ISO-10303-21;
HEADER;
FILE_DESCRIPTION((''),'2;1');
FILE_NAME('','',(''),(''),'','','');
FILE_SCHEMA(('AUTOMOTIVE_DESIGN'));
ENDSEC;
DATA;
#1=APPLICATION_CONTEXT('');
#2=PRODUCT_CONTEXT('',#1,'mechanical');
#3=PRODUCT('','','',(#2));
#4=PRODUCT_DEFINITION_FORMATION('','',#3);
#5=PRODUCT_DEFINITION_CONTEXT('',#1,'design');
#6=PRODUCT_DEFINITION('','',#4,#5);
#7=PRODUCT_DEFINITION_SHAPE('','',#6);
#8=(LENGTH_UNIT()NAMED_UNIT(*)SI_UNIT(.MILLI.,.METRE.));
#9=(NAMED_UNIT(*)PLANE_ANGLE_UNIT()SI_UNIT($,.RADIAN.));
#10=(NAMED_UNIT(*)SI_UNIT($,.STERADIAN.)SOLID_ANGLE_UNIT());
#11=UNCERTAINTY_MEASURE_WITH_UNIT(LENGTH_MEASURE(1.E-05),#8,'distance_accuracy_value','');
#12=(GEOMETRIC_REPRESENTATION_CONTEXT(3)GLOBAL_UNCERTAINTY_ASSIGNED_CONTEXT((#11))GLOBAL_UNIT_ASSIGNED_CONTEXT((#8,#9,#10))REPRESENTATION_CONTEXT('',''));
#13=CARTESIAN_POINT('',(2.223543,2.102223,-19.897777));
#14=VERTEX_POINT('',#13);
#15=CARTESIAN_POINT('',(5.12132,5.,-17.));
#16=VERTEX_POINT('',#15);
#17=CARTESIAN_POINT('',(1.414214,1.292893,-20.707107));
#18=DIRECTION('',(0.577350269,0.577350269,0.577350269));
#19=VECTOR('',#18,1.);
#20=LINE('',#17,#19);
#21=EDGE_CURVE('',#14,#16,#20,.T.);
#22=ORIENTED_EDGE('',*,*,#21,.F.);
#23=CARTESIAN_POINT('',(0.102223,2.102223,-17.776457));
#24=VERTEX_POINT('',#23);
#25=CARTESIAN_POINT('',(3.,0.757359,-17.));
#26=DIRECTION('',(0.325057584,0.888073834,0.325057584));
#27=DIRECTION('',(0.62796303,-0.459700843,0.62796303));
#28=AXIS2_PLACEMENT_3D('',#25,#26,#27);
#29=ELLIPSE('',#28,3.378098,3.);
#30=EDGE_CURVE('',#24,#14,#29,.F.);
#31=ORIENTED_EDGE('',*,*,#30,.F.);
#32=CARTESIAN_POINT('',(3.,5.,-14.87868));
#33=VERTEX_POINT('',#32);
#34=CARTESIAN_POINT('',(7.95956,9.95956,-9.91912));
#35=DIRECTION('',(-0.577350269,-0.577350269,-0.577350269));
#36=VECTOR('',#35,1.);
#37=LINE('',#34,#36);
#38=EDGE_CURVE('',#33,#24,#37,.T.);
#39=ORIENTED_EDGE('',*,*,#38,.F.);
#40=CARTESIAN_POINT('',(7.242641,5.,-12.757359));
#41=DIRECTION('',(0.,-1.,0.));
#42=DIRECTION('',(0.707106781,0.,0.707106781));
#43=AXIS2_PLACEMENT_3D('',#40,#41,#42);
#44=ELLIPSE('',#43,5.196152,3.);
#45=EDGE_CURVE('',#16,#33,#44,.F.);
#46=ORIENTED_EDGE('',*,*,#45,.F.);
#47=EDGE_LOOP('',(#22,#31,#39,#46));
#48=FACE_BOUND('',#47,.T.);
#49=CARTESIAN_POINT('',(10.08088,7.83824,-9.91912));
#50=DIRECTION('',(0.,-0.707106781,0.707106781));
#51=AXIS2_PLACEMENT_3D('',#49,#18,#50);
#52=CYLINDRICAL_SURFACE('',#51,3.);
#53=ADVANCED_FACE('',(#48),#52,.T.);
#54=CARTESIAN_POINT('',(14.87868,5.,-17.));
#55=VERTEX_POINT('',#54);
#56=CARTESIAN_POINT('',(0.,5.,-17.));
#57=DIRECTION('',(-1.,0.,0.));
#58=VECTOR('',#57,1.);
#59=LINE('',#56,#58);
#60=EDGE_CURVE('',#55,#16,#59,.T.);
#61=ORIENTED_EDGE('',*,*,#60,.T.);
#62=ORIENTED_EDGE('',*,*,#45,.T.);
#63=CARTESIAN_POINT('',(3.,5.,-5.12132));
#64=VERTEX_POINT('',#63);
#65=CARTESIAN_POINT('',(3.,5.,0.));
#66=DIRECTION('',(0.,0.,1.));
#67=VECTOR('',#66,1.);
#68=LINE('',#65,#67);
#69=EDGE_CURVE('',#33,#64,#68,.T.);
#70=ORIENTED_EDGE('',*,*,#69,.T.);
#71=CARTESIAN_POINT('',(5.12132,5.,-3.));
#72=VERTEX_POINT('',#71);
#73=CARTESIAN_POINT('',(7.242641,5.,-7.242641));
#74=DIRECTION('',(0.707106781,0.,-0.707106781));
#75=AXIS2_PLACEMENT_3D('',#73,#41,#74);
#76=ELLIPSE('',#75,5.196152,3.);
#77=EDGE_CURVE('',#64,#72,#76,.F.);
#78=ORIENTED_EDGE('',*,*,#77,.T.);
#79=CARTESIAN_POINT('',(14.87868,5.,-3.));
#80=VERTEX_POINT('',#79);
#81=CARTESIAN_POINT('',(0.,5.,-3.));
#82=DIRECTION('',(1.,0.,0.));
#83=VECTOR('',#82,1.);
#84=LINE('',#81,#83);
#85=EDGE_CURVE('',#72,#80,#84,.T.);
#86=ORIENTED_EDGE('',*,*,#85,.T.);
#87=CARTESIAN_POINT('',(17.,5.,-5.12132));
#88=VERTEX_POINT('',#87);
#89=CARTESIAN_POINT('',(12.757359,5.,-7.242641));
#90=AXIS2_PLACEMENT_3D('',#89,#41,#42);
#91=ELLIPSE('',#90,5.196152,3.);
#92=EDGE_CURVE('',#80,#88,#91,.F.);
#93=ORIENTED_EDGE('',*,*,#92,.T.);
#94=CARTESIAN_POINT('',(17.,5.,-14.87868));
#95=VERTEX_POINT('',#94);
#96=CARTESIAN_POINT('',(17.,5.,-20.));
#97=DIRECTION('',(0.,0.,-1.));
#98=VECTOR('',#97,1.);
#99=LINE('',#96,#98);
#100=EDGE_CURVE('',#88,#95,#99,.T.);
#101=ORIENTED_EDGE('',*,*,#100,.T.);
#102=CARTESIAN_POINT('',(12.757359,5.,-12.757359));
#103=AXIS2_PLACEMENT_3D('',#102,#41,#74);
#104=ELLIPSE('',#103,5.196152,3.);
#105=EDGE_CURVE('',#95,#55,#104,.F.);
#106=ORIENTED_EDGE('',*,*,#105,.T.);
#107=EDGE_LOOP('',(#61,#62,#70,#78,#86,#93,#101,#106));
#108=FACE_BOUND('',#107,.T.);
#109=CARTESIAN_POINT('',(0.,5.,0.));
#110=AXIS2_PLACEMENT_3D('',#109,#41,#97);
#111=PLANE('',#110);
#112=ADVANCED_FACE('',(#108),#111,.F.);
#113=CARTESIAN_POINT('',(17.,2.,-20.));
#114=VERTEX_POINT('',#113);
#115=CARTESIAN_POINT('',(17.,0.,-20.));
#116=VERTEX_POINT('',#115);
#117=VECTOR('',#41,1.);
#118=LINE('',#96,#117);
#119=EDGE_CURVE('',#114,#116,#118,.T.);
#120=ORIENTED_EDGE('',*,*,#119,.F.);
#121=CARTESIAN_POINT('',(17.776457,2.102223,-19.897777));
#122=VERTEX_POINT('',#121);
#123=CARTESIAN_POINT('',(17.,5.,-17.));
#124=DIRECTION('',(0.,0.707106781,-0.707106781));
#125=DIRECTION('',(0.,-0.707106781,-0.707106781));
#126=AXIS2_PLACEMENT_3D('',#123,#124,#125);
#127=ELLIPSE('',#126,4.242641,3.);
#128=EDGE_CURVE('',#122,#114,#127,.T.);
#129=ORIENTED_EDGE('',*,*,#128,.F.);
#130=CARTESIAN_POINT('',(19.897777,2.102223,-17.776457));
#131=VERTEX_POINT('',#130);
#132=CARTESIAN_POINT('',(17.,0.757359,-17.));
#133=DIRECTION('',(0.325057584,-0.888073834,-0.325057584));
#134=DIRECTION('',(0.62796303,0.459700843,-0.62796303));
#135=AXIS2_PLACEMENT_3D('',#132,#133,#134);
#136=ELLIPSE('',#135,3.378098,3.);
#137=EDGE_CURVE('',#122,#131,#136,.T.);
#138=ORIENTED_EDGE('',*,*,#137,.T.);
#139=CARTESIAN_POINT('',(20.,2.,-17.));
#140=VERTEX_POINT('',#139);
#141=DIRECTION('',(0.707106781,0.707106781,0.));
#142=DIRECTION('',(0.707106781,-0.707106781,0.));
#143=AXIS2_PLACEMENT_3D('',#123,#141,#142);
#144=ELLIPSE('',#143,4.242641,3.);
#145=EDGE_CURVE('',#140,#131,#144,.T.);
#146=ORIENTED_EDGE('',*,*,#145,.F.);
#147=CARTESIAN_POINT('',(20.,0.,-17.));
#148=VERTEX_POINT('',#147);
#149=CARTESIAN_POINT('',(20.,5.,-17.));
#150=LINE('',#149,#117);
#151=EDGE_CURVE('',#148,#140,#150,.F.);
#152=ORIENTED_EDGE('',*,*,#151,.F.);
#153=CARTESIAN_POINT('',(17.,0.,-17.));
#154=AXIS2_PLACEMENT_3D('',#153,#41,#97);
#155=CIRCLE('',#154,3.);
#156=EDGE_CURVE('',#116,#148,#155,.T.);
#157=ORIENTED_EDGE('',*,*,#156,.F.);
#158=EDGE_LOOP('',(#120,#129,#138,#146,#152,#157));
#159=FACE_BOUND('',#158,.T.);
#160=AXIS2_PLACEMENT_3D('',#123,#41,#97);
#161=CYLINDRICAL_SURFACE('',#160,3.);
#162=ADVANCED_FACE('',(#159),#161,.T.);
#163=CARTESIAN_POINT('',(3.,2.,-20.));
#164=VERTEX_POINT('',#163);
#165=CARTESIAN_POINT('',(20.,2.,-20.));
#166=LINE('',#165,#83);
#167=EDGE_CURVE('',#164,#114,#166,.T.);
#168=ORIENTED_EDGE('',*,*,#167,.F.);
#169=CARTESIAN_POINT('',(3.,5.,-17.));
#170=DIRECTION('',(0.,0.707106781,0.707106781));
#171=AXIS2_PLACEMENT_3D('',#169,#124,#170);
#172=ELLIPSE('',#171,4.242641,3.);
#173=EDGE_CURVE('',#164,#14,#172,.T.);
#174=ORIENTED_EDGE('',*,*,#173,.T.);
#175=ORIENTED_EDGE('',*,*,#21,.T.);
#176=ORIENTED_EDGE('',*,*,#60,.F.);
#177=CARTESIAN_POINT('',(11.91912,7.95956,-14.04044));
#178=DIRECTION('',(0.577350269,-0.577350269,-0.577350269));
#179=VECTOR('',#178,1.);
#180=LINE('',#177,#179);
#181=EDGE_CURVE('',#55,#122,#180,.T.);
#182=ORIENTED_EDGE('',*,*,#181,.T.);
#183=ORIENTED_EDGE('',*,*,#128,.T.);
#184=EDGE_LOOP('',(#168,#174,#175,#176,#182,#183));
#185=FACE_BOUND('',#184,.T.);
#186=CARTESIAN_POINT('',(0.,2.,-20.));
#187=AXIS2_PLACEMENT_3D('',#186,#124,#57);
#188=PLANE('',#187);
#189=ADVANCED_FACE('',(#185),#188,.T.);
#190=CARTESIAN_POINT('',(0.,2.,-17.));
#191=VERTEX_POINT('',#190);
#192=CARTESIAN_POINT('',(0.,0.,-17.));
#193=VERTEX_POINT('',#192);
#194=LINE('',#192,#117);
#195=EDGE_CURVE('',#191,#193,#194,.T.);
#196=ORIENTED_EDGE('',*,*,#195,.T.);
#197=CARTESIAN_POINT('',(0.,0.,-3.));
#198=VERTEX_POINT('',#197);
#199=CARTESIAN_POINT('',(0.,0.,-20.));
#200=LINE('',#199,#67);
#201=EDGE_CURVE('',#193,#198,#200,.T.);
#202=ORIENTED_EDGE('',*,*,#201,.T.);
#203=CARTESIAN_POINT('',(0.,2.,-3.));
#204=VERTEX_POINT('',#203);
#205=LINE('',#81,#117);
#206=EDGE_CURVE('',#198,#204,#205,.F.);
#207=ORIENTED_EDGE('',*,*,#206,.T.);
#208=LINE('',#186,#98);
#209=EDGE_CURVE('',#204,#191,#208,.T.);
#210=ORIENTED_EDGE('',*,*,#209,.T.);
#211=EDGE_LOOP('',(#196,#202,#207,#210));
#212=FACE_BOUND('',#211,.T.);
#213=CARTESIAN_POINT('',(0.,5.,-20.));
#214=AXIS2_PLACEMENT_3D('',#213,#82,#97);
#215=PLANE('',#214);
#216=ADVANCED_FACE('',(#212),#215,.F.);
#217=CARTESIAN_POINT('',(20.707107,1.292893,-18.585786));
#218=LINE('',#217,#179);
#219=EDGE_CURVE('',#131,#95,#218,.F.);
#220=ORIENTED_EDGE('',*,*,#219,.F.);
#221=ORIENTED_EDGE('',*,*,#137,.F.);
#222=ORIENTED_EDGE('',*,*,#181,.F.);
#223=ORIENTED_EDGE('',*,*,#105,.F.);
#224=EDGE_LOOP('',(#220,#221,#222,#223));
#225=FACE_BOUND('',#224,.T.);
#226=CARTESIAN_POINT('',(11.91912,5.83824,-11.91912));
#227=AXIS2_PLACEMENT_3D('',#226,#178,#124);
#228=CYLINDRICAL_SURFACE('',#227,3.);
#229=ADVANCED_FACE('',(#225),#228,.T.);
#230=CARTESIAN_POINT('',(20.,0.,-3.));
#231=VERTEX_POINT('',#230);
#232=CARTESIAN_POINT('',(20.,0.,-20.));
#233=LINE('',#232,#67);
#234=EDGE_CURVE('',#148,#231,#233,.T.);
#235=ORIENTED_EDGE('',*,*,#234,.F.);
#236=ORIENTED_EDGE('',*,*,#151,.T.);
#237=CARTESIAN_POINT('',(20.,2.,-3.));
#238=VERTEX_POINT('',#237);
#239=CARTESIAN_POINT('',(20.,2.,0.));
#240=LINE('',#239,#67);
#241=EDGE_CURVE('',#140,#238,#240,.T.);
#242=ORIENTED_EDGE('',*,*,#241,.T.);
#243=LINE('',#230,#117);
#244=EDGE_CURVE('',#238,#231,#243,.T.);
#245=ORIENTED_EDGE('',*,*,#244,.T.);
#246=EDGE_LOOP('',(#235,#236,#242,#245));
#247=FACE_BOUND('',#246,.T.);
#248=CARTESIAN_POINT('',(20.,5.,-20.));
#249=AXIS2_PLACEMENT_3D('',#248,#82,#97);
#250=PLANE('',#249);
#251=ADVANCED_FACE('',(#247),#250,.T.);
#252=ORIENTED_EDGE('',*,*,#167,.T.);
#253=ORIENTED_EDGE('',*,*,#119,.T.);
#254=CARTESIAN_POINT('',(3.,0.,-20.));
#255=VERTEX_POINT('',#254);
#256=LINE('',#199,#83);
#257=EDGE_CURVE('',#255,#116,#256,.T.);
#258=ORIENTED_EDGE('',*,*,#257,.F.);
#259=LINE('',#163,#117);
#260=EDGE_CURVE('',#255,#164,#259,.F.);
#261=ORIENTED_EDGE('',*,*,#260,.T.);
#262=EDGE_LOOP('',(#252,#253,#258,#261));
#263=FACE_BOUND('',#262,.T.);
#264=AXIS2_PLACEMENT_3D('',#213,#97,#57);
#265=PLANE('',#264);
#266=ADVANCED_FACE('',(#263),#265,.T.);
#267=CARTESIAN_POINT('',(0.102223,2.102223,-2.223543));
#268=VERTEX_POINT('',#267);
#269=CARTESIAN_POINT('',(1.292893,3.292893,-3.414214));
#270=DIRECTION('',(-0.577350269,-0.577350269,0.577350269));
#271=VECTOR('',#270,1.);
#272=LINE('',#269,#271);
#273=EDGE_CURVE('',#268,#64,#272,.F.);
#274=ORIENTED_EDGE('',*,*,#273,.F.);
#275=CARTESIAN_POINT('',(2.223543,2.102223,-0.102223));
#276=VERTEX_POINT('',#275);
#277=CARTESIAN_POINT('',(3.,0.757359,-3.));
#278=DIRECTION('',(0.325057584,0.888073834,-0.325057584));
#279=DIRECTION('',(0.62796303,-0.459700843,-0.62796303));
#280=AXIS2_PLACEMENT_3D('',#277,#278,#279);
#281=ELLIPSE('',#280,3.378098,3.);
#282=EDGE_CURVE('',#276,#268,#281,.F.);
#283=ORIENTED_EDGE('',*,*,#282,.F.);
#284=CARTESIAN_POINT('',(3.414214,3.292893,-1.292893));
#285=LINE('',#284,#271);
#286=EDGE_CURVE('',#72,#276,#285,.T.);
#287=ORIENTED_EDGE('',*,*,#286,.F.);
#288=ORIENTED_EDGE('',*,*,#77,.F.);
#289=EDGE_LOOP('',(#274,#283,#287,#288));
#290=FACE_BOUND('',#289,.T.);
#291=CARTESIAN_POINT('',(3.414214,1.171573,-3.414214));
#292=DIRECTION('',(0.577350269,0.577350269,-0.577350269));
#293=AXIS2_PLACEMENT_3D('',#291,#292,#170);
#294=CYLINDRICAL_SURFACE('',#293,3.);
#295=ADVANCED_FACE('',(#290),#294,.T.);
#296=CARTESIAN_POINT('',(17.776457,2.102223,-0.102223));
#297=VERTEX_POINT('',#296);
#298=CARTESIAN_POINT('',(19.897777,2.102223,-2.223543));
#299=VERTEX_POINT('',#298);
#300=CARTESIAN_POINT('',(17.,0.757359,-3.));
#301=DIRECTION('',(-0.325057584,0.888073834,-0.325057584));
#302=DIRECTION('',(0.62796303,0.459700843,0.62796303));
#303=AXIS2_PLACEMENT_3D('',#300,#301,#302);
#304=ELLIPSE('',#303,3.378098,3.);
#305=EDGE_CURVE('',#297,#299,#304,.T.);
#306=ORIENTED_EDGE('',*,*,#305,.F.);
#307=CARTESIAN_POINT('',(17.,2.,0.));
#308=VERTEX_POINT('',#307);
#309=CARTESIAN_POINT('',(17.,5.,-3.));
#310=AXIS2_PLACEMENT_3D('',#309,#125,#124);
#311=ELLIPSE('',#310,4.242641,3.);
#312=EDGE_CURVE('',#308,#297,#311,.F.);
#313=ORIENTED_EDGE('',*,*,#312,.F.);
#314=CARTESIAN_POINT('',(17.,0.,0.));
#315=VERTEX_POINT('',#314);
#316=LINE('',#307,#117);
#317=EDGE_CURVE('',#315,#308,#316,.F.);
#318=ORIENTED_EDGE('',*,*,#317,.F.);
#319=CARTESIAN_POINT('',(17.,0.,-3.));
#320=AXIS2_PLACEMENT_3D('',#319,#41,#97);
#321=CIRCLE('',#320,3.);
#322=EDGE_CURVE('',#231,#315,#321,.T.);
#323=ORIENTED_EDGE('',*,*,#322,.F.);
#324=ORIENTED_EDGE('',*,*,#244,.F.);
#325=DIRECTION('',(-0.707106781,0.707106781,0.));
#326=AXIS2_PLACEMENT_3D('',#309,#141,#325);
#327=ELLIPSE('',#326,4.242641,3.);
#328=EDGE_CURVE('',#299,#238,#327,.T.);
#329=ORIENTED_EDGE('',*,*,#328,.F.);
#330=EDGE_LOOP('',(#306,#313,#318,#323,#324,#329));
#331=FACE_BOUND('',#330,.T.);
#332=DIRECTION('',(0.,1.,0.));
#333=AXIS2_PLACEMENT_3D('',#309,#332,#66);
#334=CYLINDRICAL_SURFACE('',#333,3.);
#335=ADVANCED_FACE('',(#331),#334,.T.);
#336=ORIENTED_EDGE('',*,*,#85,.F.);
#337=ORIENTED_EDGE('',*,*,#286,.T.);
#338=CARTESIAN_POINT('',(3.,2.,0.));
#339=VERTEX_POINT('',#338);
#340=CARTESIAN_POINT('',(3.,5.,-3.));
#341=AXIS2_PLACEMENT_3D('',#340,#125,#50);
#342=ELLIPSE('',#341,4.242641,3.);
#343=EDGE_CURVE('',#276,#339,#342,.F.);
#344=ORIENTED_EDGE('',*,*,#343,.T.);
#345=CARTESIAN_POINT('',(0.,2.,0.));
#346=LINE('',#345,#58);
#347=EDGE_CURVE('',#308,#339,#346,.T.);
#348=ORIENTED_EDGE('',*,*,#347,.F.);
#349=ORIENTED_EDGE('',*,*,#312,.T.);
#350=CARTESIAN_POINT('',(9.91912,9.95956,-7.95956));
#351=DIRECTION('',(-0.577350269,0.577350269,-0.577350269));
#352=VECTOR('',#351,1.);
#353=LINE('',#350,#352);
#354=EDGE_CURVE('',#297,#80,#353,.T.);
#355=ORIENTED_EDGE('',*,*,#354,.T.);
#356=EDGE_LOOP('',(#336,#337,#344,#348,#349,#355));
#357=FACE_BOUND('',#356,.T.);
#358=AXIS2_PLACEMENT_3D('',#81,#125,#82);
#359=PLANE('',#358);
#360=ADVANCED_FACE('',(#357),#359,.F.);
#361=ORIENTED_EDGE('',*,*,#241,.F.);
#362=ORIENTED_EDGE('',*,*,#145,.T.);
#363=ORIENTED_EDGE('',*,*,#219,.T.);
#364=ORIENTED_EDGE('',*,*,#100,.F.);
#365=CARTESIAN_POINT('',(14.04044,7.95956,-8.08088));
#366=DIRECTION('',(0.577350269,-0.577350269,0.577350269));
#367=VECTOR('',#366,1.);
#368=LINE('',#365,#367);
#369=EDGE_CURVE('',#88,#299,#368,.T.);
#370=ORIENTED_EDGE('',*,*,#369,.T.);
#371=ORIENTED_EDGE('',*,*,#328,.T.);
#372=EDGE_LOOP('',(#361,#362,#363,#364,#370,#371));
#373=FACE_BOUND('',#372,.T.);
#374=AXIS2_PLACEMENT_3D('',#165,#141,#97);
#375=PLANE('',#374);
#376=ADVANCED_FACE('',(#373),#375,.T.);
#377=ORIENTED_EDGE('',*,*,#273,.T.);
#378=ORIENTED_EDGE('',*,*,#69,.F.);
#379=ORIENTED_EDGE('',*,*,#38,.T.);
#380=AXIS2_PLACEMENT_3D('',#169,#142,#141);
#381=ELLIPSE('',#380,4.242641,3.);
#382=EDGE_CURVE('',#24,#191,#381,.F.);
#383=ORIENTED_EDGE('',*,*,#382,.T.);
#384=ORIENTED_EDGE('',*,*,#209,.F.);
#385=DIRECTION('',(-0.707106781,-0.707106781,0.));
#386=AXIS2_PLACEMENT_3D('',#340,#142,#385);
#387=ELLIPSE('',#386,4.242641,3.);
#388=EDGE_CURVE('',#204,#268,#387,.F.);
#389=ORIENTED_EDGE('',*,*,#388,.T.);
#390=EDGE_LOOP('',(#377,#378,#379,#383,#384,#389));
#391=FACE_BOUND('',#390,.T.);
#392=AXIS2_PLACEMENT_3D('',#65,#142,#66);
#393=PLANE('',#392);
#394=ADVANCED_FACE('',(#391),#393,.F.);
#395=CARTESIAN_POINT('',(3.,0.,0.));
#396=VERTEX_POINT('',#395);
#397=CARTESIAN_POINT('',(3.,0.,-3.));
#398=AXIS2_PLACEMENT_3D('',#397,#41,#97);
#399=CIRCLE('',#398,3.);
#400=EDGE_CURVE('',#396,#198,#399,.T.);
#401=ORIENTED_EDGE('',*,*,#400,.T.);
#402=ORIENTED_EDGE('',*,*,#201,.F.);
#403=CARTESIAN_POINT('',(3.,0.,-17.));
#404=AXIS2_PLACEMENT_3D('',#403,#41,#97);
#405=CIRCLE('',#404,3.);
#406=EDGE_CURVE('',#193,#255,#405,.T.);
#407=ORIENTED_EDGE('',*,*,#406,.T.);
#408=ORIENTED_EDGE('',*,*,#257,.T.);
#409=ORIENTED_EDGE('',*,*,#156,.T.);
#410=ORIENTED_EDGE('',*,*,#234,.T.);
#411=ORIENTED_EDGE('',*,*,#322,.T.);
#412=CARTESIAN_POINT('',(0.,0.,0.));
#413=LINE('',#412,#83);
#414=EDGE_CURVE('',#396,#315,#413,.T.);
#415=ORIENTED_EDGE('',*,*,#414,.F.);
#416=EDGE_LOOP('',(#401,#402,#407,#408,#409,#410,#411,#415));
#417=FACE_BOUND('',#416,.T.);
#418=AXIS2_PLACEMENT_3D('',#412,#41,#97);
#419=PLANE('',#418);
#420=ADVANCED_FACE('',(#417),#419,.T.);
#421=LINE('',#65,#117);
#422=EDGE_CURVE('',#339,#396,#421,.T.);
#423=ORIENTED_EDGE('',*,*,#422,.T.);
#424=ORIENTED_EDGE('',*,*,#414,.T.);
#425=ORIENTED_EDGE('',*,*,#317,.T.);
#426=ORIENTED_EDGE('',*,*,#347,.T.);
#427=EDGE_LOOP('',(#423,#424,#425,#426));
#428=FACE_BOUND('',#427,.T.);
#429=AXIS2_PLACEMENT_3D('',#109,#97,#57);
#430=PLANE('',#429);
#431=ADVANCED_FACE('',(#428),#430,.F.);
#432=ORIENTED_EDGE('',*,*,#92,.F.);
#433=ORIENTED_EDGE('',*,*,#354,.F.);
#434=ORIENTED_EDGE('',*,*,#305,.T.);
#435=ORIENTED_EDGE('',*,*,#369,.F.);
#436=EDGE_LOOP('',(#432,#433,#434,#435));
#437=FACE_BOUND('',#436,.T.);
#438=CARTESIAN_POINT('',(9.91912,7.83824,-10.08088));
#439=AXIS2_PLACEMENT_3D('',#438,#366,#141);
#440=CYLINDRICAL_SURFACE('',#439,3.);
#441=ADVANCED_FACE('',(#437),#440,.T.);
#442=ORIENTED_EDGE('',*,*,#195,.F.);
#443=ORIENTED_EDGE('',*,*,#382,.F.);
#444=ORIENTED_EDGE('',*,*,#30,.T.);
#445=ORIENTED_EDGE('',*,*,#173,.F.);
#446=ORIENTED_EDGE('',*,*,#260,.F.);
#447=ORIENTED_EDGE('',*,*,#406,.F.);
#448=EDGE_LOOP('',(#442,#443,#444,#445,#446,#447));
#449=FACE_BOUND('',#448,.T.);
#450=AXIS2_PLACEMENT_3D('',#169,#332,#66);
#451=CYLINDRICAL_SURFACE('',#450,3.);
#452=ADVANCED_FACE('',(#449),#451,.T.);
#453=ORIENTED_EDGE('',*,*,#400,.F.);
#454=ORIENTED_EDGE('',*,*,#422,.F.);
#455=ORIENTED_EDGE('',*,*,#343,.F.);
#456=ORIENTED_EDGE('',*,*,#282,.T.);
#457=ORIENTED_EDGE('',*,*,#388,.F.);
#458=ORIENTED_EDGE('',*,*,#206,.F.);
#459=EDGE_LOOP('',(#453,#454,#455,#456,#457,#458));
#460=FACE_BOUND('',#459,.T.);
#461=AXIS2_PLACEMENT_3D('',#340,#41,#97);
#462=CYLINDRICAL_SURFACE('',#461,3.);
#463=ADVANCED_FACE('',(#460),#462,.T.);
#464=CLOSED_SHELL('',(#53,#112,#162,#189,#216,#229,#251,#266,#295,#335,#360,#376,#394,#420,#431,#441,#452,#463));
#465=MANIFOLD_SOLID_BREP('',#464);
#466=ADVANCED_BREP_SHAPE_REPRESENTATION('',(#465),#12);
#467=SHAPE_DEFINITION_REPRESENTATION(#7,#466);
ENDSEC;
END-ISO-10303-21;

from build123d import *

# Parameters (mm, degrees)
SKETCH1_W           = 20
SKETCH1_H           = 20
BOSS_EXTRUDE1_DEPTH = 5
CHAMFER1_SIZE       = 3
FILLET1_R           = 3


with BuildPart() as part:
    # Sketch1 → Boss-Extrude1 (new body)
    with BuildSketch(Plane(origin=(0, 0, 0), x_dir=(1, 0, 0), z_dir=(0, 1, 0))):
        with Locations((10, 10)):
            Rectangle(SKETCH1_W, SKETCH1_H)
    extrude(amount=BOSS_EXTRUDE1_DEPTH)

    # Chamfer1
    chamfer1_edges = [part.edges().sort_by_distance(p)[0] for p in [
        (10, 5, -20),
        (0, 5, -10),
        (10, 5, 0),
        (20, 5, -10),
    ]]
    chamfer(chamfer1_edges, length=CHAMFER1_SIZE)

    # Fillet1
    # the kernel refuses this fillet: 3 mm, written as the material it takes off along each edge
    with BuildSketch(Plane(origin=(0, -7.5, 0), x_dir=(0, 0, -1), z_dir=(0, 1, 0)), Plane(origin=(0, -7.5, -20), x_dir=(1, 0, 0), z_dir=(0, 1, 0))) as fillet1_piece_1:
        with BuildLine():
            CenterArc((FILLET1_R, -FILLET1_R), FILLET1_R, 90, 90)
            Line((0, -FILLET1_R), (0, 0))
            Line((0, 0), (FILLET1_R, 0))
        make_face()
    extrude(amount=17, mode=Mode.SUBTRACT)
    with BuildSketch(Plane(origin=(20, -7.5, -20), x_dir=(-1, 0, 0), z_dir=(0, 1, 0)), Plane(origin=(20, -7.5, 0), x_dir=(0, 0, -1), z_dir=(0, 1, 0))) as fillet1_piece_2:
        with BuildLine():
            CenterArc((FILLET1_R, FILLET1_R), FILLET1_R, 180, 90)
            Line((0, FILLET1_R), (0, 0))
            Line((0, 0), (FILLET1_R, 0))
        make_face()
    extrude(amount=17, mode=Mode.SUBTRACT)
    with BuildSketch(Plane(origin=(22.5, -0.5, -22.5), x_dir=(-0.8164965809277263, -0.4082482904638636, -0.408248290463862), z_dir=(-0.5773502691896255, 0.577350269189626, 0.577350269189626)), Plane(origin=(22.5, -0.5, 2.5), x_dir=(0.4082482904638631, -0.4082482904638628, -0.8164965809277261), z_dir=(-0.5773502691896261, 0.5773502691896256, -0.5773502691896256))) as fillet1_piece_3:
        with BuildLine():
            CenterArc((FILLET1_R * 0.57735026919, FILLET1_R), FILLET1_R, 210, 60)
            Line((-FILLET1_R * 0.288675134595, FILLET1_R * 0.5), (0, 0))
            Line((0, 0), (FILLET1_R * 0.57735026919, 0))
        make_face()
    extrude(amount=13.856406461, mode=Mode.SUBTRACT)
    with BuildSketch(Plane(origin=(-2.5, -0.5, -22.5), x_dir=(0.8164965809277259, -0.40824829046386324, -0.40824829046386274), z_dir=(0.5773502691896258, 0.5773502691896258, 0.5773502691896258)), Plane(origin=(-2.5, -0.5, 2.5), x_dir=(-0.40824829046386274, -0.4082482904638633, -0.816496580927726), z_dir=(0.5773502691896258, 0.5773502691896258, -0.5773502691896258))) as fillet1_piece_4:
        with BuildLine():
            CenterArc((FILLET1_R * 0.57735026919, -FILLET1_R), FILLET1_R, 90, 60)
            Line((-FILLET1_R * 0.288675134595, -FILLET1_R * 0.5), (0, 0))
            Line((0, 0), (FILLET1_R * 0.57735026919, 0))
        make_face()
    extrude(amount=13.856406461, mode=Mode.SUBTRACT)


solid = part.part
